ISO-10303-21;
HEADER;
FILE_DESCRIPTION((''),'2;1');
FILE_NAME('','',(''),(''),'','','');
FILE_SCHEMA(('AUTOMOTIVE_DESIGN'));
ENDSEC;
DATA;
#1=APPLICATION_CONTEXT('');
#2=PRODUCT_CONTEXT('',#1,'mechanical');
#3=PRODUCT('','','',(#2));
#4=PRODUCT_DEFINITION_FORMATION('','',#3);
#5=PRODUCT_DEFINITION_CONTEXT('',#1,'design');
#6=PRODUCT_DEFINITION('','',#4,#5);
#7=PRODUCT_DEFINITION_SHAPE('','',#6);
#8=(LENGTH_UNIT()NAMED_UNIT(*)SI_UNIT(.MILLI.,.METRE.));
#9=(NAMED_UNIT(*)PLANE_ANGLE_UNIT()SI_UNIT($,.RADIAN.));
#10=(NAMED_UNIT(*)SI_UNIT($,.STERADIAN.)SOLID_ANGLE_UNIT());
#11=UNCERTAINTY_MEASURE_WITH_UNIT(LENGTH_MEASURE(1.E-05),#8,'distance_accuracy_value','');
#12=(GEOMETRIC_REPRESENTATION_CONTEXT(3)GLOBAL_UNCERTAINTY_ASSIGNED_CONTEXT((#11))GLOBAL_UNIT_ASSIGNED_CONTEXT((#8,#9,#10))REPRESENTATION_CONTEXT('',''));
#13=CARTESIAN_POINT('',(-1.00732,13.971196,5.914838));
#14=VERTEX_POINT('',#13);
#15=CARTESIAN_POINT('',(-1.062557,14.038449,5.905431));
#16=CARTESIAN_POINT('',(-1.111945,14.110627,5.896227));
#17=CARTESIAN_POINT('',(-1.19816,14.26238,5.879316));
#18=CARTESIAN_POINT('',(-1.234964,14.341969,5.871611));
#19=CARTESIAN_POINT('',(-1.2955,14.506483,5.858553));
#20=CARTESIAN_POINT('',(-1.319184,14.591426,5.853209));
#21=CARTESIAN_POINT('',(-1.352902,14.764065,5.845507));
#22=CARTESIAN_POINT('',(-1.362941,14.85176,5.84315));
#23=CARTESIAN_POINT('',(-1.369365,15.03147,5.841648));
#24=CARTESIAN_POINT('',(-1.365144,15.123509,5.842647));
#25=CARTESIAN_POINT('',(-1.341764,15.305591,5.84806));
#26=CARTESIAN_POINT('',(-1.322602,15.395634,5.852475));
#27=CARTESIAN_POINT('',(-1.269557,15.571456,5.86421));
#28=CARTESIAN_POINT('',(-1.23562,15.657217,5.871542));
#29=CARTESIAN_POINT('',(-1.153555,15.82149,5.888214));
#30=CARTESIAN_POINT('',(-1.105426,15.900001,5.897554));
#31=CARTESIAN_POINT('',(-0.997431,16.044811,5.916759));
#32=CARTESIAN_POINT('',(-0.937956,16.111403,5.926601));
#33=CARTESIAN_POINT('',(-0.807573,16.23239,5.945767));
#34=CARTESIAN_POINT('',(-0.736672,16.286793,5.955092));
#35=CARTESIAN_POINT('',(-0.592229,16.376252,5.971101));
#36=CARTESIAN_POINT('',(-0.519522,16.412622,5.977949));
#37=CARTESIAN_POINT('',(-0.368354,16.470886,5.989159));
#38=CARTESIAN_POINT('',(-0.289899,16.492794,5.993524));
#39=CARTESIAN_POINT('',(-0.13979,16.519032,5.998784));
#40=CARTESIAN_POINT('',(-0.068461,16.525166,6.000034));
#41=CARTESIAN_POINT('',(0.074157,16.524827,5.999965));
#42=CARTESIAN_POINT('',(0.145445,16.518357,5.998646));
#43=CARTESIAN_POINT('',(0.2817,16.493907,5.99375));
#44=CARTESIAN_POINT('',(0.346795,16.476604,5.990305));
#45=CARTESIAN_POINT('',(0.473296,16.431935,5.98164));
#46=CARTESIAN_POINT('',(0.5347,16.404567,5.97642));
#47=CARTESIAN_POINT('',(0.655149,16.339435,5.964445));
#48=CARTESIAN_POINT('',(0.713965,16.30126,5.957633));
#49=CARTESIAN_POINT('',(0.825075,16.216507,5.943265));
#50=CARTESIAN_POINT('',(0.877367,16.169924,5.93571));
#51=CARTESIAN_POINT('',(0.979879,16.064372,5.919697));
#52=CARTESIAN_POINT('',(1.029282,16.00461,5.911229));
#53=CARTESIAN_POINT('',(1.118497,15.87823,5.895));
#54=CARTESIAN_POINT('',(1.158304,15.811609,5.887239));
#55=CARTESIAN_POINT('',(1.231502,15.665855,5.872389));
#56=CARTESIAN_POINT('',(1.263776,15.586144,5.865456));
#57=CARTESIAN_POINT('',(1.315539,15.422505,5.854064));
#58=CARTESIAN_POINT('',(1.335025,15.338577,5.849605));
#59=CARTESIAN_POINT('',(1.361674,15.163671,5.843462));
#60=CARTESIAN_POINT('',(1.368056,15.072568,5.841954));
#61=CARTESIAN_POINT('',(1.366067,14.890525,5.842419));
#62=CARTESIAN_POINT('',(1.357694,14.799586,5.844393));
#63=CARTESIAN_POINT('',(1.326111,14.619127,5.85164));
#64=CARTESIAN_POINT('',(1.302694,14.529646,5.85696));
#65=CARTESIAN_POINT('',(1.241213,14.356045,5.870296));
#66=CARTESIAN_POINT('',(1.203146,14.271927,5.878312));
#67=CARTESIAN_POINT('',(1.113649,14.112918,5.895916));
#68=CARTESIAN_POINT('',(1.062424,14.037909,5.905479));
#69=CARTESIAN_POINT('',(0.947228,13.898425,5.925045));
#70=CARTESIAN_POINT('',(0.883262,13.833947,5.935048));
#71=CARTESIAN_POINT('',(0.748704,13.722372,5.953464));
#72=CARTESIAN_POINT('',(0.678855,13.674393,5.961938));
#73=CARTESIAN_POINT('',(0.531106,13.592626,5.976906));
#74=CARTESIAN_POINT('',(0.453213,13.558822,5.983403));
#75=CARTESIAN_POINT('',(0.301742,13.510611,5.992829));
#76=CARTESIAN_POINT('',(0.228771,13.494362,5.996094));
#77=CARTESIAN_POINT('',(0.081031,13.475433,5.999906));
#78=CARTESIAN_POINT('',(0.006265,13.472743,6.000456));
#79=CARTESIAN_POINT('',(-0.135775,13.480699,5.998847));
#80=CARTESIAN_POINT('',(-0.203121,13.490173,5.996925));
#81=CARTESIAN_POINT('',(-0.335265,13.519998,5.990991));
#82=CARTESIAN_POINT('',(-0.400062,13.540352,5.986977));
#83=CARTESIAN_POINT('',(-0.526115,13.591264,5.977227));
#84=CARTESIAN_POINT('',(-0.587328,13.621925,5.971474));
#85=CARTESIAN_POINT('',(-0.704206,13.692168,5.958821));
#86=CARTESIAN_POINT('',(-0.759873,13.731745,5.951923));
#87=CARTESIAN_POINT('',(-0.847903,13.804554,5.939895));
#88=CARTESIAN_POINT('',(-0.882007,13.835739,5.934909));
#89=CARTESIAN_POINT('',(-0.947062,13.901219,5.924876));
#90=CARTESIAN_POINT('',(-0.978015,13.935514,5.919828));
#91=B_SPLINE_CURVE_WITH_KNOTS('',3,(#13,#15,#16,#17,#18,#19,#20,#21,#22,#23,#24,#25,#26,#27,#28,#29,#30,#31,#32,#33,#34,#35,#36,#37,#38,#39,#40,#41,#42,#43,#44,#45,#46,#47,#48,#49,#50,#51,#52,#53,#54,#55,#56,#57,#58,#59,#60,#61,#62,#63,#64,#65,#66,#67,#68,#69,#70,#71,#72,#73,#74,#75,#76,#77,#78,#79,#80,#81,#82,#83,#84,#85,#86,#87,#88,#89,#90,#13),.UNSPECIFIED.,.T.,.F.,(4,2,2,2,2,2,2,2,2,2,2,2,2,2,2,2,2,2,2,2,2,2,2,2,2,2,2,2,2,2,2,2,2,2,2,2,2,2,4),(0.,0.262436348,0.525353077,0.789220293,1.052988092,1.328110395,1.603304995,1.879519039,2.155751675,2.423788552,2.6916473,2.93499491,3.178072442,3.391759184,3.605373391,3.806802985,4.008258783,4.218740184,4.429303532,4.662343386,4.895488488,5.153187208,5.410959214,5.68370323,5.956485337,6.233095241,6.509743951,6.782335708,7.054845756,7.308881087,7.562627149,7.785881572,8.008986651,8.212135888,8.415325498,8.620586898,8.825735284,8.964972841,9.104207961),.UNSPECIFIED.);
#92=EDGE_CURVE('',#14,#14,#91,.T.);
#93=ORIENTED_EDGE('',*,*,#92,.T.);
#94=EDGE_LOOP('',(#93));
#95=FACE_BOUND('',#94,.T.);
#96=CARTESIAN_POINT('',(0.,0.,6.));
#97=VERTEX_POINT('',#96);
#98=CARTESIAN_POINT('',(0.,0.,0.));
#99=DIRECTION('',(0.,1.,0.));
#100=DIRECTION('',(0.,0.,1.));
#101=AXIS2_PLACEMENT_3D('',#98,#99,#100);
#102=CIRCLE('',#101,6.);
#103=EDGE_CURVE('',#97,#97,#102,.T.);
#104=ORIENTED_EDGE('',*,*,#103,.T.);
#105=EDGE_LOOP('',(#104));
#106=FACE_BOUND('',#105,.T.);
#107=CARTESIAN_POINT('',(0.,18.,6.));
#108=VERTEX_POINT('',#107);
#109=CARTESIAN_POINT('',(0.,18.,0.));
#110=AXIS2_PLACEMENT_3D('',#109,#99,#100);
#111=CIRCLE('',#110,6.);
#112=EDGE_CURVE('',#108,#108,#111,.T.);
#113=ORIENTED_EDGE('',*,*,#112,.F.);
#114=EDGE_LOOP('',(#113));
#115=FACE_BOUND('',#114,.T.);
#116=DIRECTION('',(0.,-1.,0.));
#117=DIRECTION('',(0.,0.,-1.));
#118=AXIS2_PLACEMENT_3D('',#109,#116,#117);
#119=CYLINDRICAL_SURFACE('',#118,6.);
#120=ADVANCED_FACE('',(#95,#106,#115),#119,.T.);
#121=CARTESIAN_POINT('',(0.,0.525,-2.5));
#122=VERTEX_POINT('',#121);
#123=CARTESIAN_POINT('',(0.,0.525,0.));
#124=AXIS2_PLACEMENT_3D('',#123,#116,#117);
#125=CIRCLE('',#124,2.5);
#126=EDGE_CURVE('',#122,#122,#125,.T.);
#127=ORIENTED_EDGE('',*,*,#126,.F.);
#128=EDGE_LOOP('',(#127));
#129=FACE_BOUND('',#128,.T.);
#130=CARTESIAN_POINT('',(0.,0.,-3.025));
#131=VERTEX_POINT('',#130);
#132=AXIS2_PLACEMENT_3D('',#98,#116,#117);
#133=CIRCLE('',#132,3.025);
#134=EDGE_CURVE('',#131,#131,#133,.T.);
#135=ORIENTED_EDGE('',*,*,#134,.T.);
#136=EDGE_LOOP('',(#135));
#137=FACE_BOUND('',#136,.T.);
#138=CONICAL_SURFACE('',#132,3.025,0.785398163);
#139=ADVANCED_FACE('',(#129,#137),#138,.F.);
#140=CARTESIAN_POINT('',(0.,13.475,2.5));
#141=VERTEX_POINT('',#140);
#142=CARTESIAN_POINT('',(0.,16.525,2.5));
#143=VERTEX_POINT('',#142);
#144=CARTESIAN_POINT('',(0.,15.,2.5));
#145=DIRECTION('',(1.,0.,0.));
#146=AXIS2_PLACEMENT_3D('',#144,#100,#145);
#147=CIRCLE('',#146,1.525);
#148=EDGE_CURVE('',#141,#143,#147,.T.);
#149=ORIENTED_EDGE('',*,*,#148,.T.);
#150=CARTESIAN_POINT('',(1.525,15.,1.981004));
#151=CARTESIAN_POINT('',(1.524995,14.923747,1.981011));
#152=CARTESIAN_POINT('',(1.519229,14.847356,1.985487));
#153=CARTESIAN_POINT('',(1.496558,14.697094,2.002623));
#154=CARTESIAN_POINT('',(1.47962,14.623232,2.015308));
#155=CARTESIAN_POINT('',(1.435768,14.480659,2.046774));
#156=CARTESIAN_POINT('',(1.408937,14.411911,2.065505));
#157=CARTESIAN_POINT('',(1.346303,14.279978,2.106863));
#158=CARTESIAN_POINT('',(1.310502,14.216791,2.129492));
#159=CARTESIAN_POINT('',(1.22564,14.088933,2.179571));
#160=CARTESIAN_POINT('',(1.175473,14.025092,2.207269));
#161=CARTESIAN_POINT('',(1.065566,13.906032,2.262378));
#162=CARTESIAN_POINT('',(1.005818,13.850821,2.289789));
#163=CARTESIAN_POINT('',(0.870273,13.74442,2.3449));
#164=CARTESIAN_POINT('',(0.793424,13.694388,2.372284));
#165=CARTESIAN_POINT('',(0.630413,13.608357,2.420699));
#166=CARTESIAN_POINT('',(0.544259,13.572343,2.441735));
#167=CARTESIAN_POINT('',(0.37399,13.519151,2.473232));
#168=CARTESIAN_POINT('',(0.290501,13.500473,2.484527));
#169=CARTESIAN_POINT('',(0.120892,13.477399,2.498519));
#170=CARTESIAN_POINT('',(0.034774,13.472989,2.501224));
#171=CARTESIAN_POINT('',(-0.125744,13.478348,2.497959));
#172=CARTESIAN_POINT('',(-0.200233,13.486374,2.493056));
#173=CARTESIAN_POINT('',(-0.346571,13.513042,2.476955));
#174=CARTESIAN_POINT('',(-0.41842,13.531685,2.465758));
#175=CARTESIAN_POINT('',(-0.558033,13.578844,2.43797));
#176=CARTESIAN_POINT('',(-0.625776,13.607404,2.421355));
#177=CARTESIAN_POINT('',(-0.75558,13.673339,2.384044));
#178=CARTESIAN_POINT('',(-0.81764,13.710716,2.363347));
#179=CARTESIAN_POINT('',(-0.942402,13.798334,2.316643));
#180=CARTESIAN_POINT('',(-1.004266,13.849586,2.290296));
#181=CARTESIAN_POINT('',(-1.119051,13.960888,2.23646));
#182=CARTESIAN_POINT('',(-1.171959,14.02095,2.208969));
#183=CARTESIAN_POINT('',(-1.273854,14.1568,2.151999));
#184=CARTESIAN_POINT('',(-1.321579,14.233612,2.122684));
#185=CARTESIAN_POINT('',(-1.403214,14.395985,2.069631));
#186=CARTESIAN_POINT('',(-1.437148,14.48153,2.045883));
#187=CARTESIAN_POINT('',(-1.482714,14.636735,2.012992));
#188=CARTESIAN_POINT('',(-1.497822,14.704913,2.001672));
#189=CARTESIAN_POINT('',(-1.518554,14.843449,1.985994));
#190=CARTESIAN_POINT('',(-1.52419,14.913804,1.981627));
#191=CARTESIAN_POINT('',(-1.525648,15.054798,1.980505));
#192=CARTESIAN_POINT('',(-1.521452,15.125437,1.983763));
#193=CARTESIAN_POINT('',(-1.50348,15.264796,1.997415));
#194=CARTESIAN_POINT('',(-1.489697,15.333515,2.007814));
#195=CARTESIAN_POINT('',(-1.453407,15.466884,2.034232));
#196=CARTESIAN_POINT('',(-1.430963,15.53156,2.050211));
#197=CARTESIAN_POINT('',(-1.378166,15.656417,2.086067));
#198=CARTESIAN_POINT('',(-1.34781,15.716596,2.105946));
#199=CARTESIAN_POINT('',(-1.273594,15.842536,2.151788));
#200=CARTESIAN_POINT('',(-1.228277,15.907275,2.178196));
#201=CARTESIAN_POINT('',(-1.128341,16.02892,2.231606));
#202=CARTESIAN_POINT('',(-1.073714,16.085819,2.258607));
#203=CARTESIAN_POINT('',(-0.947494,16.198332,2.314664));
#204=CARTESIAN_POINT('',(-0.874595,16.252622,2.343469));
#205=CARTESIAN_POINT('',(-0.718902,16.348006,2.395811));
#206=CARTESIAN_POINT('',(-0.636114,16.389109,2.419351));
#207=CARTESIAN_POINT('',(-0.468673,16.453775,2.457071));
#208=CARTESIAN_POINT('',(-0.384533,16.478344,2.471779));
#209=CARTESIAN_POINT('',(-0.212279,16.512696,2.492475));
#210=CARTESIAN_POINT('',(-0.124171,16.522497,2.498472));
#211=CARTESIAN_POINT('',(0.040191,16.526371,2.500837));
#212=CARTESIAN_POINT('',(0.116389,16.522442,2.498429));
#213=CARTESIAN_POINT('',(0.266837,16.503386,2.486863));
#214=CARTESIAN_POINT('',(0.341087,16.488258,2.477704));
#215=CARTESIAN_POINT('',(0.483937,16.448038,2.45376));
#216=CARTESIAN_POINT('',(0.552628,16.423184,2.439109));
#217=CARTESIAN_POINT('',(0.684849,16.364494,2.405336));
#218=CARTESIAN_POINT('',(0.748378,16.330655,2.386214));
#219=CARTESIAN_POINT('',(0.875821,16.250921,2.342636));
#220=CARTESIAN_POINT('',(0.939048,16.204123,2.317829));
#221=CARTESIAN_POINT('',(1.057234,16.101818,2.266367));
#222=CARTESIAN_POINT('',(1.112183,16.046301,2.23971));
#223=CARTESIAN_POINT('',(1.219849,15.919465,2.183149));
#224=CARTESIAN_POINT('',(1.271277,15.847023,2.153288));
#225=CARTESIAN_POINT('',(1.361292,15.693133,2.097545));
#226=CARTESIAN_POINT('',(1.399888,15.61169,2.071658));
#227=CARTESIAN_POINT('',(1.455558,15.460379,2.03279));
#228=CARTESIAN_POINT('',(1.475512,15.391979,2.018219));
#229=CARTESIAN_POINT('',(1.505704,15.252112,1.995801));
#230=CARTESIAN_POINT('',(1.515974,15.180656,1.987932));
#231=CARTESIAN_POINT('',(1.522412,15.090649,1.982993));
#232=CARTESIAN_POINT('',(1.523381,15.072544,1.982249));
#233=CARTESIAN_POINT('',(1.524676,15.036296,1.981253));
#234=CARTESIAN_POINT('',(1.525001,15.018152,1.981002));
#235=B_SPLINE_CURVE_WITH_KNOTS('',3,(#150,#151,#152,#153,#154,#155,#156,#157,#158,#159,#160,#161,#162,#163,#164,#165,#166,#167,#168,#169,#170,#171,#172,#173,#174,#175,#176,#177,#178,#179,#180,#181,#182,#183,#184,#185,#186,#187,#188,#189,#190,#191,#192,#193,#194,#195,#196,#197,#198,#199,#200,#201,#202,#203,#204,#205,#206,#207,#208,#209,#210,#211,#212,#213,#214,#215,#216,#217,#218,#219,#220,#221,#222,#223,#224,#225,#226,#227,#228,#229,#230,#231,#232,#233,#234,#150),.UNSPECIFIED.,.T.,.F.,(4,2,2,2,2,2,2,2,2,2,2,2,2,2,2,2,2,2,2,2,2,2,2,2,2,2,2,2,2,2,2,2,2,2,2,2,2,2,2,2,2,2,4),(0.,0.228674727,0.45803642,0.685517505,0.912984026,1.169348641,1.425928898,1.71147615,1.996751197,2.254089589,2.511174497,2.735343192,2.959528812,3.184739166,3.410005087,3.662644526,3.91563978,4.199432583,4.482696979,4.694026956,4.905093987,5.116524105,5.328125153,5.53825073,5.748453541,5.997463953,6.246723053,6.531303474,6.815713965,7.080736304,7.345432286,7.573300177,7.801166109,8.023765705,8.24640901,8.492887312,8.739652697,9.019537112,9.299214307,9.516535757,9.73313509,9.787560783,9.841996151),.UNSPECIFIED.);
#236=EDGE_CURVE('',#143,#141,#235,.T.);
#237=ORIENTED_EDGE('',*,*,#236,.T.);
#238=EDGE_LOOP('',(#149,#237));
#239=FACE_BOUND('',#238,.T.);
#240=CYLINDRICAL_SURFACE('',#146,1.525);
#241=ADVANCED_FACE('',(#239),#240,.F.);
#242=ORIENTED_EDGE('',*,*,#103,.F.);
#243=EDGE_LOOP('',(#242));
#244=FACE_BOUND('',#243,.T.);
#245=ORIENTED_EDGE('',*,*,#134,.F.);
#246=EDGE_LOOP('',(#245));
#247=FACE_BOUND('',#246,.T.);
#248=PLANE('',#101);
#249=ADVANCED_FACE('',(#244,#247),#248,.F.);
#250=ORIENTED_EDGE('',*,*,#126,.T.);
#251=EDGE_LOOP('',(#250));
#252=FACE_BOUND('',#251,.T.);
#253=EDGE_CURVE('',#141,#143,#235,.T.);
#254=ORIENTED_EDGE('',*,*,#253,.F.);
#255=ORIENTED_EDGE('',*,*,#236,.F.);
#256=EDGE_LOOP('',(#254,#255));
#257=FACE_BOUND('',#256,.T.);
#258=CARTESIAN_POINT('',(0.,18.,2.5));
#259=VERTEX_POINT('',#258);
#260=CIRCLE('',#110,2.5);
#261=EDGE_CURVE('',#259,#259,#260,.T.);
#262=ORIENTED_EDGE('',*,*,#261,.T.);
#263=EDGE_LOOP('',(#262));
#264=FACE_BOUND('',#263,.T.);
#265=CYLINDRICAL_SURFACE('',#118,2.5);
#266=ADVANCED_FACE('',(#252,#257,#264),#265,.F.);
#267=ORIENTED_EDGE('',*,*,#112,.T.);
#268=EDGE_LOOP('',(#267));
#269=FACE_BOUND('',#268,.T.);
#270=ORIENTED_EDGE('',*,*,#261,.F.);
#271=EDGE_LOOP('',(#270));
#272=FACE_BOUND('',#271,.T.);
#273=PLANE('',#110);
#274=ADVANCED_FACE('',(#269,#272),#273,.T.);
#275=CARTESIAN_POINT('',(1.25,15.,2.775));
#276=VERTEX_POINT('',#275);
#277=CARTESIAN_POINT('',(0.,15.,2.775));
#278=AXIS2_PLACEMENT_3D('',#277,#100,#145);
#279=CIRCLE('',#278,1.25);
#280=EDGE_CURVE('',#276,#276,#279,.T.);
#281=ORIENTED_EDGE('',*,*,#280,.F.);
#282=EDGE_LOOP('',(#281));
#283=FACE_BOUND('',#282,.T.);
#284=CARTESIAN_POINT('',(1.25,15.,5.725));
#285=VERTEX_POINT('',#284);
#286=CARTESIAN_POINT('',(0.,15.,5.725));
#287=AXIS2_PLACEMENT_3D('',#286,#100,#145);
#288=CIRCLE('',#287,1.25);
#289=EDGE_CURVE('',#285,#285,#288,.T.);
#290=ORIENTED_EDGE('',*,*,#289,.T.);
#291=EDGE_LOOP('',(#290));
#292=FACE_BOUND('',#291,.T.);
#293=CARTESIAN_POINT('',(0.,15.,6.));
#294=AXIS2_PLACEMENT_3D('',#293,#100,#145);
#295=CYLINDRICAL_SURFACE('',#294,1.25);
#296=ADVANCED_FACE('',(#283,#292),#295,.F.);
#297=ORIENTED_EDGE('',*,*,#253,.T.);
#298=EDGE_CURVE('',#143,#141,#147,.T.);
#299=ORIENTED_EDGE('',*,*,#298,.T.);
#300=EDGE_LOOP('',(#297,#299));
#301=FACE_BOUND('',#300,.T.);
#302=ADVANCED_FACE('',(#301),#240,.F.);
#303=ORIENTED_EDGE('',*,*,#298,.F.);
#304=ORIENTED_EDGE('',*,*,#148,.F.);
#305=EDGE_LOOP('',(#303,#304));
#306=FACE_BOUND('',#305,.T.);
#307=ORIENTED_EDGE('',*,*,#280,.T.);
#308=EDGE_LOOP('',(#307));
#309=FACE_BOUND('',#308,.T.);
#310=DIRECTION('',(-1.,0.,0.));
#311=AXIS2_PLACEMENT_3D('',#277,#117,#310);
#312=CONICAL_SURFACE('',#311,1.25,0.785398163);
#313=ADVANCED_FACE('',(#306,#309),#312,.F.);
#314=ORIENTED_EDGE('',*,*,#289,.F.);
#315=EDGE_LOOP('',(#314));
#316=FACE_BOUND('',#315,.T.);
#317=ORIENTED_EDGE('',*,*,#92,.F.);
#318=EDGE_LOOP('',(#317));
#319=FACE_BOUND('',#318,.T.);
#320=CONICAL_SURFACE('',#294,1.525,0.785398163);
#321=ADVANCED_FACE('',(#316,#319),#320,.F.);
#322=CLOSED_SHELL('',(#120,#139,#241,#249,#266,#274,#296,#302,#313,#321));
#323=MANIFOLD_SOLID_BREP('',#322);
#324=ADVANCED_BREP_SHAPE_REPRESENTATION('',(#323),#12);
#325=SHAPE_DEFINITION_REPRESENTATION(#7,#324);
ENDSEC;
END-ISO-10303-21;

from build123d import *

# Parameters (mm, degrees)
SKETCH1_R                   = 6
SKETCH1_R_2                 = 2.5
BOSS_EXTRUDE1_DEPTH         = 18
M6_TAPPED_HOLE1_D           = 5
M6_TAPPED_HOLE1_DEPTH       = 10
M6_TAPPED_HOLE1_CSINK_D     = 6.05
M6_TAPPED_HOLE1_CSINK_ANGLE = 90
M6_TAPPED_HOLE1_TIP         = 1.502151548


# Read off the part's stored shape, not the designer's step: M3 Tapped Hole1
with BuildPart() as part:
    # Sketch1 → Boss-Extrude1 (new body)
    with BuildSketch(Plane(origin=(0, 0, 0), x_dir=(1, 0, 0), z_dir=(0, 1, 0))):
        with Locations(Location((0, 0, 0), (0, 0, 270))):
            Circle(SKETCH1_R)
        with Locations(Location((0, 0, 0), (0, 0, 270))):
            Circle(SKETCH1_R_2, mode=Mode.SUBTRACT)
    extrude(amount=BOSS_EXTRUDE1_DEPTH)

    # M3 Tapped Hole1 outline → M3 Tapped Hole1 (revolve, cut)
    with BuildSketch(Plane.XZ.offset(-15)):
        Polygon((1.25, 6.000000084), (1.25, 5.725), (1.525000084, 6.000000084), align=None)
        Polygon((1.25, 2.775), (1.25, 5.725), (1.25, 6.000000084), (0, 6.000000084), (0, 1.980737508), (1.25, 1.980737508), align=None)
        Polygon((1.525, 2.5), (1.25, 2.775), (1.25, 1.980737508), (1.525000084, 1.980737508), align=None)
    revolve(axis=Axis((0, 15, 0), (0, 0, 1)), mode=Mode.SUBTRACT)

    # M6 Tapped Hole1
    with Locations(Plane.XZ):
        with Locations((0, 0)):
            CounterSinkHole(M6_TAPPED_HOLE1_D / 2, M6_TAPPED_HOLE1_CSINK_D / 2, depth=M6_TAPPED_HOLE1_DEPTH, counter_sink_angle=M6_TAPPED_HOLE1_CSINK_ANGLE)
            with Locations((0, 0, -(M6_TAPPED_HOLE1_DEPTH + M6_TAPPED_HOLE1_TIP / 2))):  # 118° drill point
                Cone(0, M6_TAPPED_HOLE1_D / 2, M6_TAPPED_HOLE1_TIP, mode=Mode.SUBTRACT)


solid = part.part
